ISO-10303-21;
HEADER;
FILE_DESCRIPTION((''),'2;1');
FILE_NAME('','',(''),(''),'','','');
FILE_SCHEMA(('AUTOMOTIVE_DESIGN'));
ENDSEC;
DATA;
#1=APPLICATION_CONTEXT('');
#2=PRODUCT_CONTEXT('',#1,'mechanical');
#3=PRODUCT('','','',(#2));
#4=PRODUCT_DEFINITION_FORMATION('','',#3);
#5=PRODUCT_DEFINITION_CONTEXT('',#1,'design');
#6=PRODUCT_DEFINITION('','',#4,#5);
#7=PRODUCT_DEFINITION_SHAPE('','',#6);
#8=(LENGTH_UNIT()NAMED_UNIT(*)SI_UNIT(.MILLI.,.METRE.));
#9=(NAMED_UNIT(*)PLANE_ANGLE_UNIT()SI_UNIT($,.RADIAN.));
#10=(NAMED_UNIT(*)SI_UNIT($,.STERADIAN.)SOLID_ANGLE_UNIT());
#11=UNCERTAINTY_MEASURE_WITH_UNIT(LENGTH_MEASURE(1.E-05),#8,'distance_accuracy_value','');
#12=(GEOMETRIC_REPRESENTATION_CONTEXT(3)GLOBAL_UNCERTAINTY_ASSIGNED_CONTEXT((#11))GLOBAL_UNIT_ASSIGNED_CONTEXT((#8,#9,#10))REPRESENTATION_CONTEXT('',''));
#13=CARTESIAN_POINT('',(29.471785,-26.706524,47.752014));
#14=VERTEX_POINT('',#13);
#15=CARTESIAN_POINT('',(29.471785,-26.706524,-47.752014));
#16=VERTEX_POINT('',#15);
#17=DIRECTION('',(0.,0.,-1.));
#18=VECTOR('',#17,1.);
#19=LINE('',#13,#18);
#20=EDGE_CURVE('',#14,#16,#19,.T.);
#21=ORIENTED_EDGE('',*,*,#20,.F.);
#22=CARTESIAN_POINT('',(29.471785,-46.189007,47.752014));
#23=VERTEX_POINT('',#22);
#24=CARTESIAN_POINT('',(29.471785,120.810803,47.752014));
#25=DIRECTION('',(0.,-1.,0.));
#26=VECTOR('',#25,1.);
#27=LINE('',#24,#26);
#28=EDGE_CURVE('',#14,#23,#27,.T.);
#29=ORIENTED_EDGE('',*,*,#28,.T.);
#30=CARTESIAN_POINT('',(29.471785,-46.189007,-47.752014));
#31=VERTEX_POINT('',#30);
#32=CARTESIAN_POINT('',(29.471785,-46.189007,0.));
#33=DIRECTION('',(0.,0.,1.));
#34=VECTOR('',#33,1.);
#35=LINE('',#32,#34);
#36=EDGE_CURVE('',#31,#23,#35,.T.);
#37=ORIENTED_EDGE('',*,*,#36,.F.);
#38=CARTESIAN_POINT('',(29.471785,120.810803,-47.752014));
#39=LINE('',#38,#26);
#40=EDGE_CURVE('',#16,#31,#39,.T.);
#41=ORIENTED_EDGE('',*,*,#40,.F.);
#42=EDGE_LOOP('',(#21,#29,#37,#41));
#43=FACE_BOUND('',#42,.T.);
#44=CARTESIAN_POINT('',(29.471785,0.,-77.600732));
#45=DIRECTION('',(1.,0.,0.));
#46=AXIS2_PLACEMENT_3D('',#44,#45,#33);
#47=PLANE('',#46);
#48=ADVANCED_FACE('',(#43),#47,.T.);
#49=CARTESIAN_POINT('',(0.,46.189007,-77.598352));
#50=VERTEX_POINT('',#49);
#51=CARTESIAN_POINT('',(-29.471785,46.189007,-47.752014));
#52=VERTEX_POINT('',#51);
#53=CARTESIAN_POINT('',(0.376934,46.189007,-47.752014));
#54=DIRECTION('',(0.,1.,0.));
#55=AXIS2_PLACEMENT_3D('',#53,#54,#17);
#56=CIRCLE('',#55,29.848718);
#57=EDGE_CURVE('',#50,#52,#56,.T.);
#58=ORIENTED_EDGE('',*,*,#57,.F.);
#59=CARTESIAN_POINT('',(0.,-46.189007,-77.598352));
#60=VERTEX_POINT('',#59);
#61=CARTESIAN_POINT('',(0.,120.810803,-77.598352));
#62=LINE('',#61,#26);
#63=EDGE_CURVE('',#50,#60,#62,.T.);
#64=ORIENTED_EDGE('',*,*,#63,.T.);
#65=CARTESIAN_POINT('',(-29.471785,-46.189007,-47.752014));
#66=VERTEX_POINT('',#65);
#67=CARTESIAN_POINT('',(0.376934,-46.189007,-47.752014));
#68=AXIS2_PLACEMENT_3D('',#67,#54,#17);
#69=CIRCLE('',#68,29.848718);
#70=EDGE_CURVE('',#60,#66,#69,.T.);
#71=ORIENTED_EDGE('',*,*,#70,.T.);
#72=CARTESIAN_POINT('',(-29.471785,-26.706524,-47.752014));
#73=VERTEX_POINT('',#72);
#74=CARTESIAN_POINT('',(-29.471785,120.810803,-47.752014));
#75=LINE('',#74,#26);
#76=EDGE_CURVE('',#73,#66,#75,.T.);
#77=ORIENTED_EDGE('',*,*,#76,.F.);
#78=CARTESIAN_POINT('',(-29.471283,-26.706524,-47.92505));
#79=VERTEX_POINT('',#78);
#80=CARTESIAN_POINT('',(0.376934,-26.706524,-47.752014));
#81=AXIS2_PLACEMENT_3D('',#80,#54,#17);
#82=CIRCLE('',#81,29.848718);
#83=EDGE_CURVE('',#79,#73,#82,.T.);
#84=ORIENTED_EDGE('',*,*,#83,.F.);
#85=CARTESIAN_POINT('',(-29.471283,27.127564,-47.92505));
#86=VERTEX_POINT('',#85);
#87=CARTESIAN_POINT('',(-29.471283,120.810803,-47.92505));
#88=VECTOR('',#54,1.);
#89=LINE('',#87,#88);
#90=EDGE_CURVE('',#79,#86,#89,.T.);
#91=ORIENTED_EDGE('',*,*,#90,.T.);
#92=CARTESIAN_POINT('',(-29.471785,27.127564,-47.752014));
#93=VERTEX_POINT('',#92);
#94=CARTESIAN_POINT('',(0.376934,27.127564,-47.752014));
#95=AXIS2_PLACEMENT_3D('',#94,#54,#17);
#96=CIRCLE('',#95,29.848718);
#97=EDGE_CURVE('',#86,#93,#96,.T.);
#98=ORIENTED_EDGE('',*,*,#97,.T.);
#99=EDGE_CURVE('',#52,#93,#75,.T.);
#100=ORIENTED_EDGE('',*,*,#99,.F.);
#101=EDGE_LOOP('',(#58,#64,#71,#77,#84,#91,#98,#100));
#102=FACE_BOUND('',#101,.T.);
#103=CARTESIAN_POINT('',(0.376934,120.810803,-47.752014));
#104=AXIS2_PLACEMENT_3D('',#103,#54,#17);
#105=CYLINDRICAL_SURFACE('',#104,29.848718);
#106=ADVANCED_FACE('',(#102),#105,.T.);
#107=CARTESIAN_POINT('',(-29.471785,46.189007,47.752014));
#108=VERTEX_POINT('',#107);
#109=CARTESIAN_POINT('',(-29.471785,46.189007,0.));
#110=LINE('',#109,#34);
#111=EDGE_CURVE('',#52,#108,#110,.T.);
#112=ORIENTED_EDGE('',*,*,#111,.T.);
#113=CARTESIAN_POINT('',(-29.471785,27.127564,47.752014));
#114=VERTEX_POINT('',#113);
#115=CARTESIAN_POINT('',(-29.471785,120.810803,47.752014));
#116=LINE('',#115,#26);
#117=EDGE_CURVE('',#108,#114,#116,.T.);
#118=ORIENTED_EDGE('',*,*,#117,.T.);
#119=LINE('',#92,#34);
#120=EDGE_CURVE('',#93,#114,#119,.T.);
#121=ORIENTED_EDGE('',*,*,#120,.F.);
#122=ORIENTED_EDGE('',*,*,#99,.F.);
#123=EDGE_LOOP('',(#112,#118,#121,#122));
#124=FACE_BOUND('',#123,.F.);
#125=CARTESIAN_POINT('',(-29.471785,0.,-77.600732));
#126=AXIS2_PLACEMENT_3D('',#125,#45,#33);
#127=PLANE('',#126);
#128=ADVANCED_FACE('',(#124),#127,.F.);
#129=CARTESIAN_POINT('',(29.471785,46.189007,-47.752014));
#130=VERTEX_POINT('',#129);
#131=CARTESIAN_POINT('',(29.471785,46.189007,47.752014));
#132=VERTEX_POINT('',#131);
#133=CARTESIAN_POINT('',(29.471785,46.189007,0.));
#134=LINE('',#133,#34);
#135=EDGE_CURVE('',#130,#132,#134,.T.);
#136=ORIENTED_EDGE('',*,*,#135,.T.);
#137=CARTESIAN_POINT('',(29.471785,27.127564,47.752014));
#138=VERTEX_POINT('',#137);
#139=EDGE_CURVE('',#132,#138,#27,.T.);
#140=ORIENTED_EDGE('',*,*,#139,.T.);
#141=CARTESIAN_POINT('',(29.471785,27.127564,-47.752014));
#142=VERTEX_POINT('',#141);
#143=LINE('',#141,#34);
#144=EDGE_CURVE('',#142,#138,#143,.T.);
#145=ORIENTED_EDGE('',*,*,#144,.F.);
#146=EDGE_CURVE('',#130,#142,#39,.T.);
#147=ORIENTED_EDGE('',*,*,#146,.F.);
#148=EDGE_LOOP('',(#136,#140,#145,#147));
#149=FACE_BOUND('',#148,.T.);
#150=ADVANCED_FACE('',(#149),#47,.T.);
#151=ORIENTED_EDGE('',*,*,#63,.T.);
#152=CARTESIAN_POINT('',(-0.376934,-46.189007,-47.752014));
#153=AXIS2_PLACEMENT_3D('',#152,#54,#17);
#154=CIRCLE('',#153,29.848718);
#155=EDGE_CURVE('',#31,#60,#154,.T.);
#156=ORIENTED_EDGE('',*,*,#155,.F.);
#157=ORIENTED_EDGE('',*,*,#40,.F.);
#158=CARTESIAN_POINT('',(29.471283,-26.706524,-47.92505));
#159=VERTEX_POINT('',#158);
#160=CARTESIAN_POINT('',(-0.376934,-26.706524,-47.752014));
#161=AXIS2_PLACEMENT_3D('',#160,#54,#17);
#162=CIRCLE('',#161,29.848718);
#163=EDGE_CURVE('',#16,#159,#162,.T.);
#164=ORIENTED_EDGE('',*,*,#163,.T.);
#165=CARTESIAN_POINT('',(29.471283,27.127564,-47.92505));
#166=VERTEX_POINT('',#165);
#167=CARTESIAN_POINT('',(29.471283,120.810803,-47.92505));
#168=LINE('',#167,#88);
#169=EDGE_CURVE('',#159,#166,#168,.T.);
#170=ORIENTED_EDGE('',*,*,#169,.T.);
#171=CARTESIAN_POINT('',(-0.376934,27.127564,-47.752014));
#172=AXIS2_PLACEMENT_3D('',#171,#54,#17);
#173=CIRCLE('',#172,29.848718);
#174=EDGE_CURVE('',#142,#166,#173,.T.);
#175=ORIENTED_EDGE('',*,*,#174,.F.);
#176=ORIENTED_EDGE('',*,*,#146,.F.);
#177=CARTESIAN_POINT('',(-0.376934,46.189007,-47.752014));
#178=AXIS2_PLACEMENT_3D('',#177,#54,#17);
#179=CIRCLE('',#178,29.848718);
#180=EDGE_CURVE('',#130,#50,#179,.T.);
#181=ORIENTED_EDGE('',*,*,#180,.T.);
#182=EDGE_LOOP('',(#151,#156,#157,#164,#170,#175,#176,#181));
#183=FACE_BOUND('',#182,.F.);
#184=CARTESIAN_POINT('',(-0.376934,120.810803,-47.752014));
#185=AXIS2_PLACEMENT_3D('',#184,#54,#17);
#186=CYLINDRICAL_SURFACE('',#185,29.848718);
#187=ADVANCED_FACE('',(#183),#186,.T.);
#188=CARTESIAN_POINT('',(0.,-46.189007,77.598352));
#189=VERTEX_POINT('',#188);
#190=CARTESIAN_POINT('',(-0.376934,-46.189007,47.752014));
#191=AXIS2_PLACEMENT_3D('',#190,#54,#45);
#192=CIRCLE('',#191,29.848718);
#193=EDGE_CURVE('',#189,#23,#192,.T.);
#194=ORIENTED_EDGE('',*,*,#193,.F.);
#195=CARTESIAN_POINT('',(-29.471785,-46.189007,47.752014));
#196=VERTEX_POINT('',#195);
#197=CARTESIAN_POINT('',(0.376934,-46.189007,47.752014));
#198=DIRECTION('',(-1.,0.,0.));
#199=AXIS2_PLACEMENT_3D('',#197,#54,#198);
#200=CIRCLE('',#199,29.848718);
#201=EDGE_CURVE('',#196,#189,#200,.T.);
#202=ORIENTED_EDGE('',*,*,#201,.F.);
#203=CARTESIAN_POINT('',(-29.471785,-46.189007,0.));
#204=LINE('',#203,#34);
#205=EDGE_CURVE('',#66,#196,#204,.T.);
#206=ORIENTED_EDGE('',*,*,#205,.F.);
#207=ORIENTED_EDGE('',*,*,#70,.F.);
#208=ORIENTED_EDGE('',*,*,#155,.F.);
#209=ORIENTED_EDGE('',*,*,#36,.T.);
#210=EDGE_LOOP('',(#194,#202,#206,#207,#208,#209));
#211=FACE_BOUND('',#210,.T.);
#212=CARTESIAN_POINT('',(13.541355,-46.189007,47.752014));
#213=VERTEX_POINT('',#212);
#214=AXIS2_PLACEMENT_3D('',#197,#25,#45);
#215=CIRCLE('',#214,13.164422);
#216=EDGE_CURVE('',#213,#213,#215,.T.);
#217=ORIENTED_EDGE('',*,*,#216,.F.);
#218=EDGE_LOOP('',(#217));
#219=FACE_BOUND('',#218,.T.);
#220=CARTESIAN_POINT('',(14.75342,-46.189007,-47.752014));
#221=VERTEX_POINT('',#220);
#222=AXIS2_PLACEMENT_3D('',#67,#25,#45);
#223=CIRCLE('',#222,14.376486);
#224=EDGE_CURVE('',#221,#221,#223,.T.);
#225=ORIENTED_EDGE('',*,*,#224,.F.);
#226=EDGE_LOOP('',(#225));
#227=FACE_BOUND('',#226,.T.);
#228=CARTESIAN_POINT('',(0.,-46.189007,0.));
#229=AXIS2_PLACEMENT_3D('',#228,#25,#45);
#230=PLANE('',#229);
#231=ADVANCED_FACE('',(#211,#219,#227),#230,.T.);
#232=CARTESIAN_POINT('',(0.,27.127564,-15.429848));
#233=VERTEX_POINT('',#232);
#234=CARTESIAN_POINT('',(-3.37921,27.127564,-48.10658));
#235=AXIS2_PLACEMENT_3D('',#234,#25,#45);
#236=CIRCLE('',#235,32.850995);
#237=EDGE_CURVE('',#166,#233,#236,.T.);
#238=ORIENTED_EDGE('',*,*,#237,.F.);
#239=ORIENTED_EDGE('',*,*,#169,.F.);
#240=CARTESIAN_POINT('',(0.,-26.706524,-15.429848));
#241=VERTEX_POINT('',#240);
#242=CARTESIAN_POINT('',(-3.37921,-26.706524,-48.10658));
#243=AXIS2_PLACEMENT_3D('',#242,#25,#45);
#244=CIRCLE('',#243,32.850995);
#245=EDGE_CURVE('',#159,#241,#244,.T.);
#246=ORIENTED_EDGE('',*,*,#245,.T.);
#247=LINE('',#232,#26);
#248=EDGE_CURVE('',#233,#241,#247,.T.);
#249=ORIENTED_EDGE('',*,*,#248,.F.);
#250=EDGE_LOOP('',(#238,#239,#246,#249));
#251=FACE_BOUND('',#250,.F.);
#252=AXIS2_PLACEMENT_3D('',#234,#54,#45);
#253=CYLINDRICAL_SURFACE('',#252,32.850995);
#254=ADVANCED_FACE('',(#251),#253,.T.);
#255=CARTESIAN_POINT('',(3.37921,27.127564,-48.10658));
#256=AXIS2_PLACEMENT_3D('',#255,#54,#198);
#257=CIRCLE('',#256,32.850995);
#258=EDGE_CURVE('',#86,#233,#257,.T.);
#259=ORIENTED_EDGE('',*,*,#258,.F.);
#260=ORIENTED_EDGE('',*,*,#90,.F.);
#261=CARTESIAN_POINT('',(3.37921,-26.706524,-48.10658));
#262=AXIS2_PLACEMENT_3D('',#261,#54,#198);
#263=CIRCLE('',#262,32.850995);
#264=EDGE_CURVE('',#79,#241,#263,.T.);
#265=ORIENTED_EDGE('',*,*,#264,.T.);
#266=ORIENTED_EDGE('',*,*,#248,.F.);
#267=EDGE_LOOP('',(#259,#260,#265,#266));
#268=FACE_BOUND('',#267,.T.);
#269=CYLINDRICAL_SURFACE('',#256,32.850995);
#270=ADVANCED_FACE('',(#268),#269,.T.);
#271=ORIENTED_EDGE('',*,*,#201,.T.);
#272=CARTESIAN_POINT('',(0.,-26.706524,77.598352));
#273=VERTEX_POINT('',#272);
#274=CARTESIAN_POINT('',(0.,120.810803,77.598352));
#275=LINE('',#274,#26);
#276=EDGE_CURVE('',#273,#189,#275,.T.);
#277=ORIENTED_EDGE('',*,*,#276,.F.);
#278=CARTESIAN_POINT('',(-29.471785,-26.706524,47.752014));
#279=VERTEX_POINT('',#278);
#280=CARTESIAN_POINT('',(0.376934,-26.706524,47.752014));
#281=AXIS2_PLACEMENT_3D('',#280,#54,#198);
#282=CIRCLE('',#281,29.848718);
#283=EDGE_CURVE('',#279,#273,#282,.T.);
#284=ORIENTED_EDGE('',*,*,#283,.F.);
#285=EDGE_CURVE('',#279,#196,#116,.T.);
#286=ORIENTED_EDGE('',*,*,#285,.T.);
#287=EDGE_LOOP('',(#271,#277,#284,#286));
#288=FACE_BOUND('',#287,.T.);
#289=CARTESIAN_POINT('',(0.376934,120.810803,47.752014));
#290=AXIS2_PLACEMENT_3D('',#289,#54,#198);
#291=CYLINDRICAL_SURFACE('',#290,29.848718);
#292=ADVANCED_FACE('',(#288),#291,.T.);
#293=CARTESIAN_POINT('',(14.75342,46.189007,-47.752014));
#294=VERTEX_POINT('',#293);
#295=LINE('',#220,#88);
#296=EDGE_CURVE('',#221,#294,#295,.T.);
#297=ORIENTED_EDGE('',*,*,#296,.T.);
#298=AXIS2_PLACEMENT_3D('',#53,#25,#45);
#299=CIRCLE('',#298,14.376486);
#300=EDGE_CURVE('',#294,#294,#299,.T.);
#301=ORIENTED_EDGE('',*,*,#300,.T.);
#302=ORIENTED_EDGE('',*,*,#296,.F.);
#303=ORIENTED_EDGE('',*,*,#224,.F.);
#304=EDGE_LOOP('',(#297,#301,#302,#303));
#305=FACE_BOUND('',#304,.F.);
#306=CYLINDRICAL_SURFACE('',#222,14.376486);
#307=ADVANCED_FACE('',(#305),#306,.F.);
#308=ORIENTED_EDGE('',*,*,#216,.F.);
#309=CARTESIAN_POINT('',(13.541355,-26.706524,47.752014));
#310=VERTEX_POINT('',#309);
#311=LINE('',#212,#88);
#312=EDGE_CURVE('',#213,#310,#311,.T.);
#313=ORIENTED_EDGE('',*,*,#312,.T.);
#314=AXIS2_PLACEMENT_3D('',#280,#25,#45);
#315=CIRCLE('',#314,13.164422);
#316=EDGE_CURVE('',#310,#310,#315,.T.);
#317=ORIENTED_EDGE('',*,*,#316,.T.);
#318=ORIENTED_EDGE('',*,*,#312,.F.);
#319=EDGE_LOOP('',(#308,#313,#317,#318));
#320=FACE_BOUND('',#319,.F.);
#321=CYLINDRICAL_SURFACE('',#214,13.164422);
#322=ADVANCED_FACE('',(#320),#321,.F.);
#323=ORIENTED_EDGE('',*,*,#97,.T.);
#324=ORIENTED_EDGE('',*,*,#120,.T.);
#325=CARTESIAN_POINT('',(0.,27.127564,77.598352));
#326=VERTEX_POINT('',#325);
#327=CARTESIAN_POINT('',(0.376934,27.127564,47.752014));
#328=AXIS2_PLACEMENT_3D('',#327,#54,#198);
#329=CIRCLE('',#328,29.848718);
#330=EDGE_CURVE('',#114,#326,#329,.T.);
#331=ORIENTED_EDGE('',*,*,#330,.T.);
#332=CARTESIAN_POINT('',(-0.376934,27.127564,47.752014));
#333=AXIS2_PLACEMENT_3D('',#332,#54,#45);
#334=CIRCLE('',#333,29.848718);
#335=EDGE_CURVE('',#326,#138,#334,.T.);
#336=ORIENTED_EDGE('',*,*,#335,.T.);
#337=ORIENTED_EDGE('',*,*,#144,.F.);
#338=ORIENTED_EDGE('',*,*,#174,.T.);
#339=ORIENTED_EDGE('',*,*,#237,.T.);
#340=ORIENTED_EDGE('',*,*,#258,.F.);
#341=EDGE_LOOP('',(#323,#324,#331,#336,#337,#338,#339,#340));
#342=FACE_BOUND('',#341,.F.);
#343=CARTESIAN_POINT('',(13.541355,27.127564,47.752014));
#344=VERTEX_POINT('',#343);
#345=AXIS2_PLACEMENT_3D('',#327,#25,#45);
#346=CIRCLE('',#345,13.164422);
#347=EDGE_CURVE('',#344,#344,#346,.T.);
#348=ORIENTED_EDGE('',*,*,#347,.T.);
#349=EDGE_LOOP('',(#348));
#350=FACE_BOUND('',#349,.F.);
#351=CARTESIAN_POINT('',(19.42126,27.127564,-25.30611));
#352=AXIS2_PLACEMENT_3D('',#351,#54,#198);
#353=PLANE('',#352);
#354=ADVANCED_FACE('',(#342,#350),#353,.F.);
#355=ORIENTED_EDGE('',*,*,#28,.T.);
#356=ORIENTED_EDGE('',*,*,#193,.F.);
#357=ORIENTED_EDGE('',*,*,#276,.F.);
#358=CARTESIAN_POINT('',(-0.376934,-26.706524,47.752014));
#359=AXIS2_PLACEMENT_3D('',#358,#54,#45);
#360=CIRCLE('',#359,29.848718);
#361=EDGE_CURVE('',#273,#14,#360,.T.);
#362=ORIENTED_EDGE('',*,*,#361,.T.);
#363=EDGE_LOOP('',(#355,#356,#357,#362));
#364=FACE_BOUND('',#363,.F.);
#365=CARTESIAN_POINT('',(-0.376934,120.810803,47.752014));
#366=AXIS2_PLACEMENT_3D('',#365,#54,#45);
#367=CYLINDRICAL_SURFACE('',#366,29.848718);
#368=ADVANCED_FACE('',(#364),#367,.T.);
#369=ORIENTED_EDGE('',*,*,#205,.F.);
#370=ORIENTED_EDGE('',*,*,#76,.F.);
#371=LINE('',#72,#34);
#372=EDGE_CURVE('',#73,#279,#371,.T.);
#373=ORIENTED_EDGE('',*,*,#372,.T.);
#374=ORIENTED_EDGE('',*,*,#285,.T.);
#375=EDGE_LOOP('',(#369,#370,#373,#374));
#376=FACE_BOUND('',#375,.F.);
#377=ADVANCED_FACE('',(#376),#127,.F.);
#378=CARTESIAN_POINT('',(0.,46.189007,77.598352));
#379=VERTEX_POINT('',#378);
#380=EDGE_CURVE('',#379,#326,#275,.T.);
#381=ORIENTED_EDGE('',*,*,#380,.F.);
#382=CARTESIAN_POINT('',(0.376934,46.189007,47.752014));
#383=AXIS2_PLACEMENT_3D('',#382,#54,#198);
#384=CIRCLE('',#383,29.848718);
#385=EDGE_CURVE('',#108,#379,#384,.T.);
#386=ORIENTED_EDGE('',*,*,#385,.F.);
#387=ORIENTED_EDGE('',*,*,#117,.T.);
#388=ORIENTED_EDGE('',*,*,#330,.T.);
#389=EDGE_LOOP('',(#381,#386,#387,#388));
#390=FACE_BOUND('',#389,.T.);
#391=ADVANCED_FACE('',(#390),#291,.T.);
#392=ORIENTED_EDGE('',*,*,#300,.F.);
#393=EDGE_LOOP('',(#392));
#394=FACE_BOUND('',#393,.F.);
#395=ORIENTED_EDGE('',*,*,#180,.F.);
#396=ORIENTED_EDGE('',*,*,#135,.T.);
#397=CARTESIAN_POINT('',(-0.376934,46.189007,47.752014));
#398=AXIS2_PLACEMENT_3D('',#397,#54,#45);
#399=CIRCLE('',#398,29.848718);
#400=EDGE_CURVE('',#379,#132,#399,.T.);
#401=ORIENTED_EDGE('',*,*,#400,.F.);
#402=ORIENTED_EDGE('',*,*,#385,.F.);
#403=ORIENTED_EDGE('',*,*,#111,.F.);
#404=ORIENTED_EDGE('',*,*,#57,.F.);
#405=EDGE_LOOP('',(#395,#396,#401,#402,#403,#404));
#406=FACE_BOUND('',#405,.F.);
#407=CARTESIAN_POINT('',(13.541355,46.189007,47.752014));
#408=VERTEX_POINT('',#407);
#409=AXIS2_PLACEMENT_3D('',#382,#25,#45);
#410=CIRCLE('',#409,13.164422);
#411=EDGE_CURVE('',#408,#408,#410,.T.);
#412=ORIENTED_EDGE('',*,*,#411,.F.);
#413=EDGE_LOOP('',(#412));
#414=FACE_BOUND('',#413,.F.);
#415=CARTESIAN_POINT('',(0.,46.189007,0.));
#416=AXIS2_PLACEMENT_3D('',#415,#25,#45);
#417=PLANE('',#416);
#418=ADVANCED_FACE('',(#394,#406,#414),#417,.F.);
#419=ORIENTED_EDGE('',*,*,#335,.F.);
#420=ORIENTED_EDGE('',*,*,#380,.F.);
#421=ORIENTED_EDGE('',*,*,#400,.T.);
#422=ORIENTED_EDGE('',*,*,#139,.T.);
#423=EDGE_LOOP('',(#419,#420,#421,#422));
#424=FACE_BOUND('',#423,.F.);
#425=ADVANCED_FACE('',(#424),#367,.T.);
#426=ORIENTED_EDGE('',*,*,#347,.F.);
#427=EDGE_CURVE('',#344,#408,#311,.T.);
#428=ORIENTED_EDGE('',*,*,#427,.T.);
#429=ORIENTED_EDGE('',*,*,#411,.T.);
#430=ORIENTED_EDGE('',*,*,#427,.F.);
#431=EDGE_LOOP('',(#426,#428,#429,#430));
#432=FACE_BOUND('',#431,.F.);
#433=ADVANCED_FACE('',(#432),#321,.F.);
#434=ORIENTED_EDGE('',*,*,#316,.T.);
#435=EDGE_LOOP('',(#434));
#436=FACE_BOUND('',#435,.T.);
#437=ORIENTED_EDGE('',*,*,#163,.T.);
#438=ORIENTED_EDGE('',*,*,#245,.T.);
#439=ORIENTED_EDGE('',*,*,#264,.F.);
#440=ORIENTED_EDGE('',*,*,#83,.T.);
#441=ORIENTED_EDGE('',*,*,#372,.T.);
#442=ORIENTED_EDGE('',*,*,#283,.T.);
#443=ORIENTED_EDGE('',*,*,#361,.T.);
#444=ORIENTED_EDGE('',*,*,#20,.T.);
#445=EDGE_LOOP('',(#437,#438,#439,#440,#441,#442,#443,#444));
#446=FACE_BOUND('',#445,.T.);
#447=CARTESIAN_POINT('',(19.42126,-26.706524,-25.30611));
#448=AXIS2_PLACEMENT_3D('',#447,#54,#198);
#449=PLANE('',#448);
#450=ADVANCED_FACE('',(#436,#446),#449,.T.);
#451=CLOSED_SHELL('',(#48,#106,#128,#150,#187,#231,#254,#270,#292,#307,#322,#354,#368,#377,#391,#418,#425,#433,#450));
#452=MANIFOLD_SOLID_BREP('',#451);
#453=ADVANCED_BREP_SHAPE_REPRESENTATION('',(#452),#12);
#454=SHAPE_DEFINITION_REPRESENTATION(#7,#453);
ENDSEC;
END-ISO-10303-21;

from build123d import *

# Parameters (mm, degrees)
F0_W        = 58.9435696602
F0_H        = 155.2014648914
F4_DEPTH    = 46.1890073493
F5_W        = 53.8340881467
F5_H        = 92.8563177586
F1_DEPTH    = 58.9445696602
F2_T1_DEPTH = 168.3050352459
F2_T3_DEPTH = 168.726075006
F2_T5_DEPTH = 241.6216065486
F3_T1_DEPTH = 53.8340881467
F6_R        = 13.164421927
F6_R_2      = 14.3764863779
F7_DEPTH    = 92.3790146986


# Not quite as in the source:
# - a fillet or chamfer that OpenCascade refuses, or shapes differently, is made with other operations: its cross-section is extruded or revolved along the edge and cut away or added


with BuildPart() as f4:
    # F0 (on Front) → F4 (new body, symmetric)
    with BuildSketch(Plane.XZ):
        Rectangle(F0_W, F0_H)
    extrude(amount=F4_DEPTH, both=True)

    # F5 (on face) → F1 (cut, through all)
    with BuildSketch(Plane.YZ.offset(29.4717848301)):
        with Locations((0.2105198801, 31.1725735664)):
            Rectangle(F5_W, F5_H)
    extrude(amount=-F1_DEPTH, mode=Mode.SUBTRACT)

    # F2: fillet of radius 29.84871837 on 6 edges, made by hand

    # F2_s2 → F2_t1 (cut)
    with BuildSketch(Plane.XZ.offset(-120.8108032743)):
        with BuildLine():
            ThreePointArc((29.4717848301, 47.7520140757), (20.7292976292, 68.8582452449), (-0.3769335399, 77.6007324457))
            Line((-0.3769335399, 77.6007324457), (29.4717848301, 77.6007324457))
            Line((29.4717848301, 77.6007324457), (29.4717848301, 47.7520140757))
        make_face()
        with BuildLine():
            ThreePointArc((-29.4717848301, 47.7520140757), (-20.7292976292, 68.8582452449), (0.3769335399, 77.6007324457))
            Line((0.3769335399, 77.6007324457), (-29.4717848301, 77.6007324457))
            Line((-29.4717848301, 77.6007324457), (-29.4717848301, 47.7520140757))
        make_face()
    extrude(amount=F2_T1_DEPTH, mode=Mode.SUBTRACT)

    # F2_s4 → F2_t3 (cut)
    with BuildSketch(Plane.XZ.offset(-47.9152717317)):
        with BuildLine():
            ThreePointArc((29.4717848301, 47.7520140757), (20.7292976292, 68.8582452449), (-0.3769335399, 77.6007324457))
            Line((-0.3769335399, 77.6007324457), (29.4717848301, 77.6007324457))
            Line((29.4717848301, 77.6007324457), (29.4717848301, 47.7520140757))
        make_face()
        with BuildLine():
            ThreePointArc((-29.4717848301, 47.7520140757), (-20.7292976292, 68.8582452449), (0.3769335399, 77.6007324457))
            Line((0.3769335399, 77.6007324457), (-29.4717848301, 77.6007324457))
            Line((-29.4717848301, 77.6007324457), (-29.4717848301, 47.7520140757))
        make_face()
    extrude(amount=F2_T3_DEPTH, mode=Mode.SUBTRACT)

    # F2_s6 → F2_t5 (cut)
    with BuildSketch(Plane.XZ.offset(-120.8108032743)):
        with BuildLine():
            ThreePointArc((-0.3769335399, -77.6007324457), (20.7292976292, -68.8582452449), (29.4717848301, -47.7520140757))
            Line((29.4717848301, -47.7520140757), (29.4717848301, -77.6007324457))
            Line((29.4717848301, -77.6007324457), (-0.3769335399, -77.6007324457))
        make_face()
        with BuildLine():
            ThreePointArc((0.3769335399, -77.6007324457), (-20.7292976292, -68.8582452449), (-29.4717848301, -47.7520140757))
            Line((-29.4717848301, -47.7520140757), (-29.4717848301, -77.6007324457))
            Line((-29.4717848301, -77.6007324457), (0.3769335399, -77.6007324457))
        make_face()
    extrude(amount=F2_T5_DEPTH, mode=Mode.SUBTRACT)

    # F3: fillet of radius 32.8509948239 on 2 edges, made by hand

    # F3_s2 → F3_t1 (cut)
    with BuildSketch(Plane.XZ.offset(-27.1275639534)):
        with BuildLine():
            ThreePointArc((29.4717848301, -48.1065801367), (19.8499512149, -24.877418928), (-3.3792099938, -15.2555853128))
            Line((-3.3792099938, -15.2555853128), (29.4717848301, -15.2555853128))
            Line((29.4717848301, -15.2555853128), (29.4717848301, -48.1065801367))
        make_face()
        with BuildLine():
            ThreePointArc((-29.4717848301, -48.1065801367), (-19.8499512149, -24.877418928), (3.3792099938, -15.2555853128))
            Line((3.3792099938, -15.2555853128), (-29.4717848301, -15.2555853128))
            Line((-29.4717848301, -15.2555853128), (-29.4717848301, -48.1065801367))
        make_face()
    extrude(amount=F3_T1_DEPTH, mode=Mode.SUBTRACT)

    # F6 (on face) → F7 (cut, through all)
    with BuildSketch(Plane.XZ.offset(46.1890073493)):
        with Locations((0.3769335399, 47.7520140757)):
            Circle(F6_R)
        with Locations((0.3769335399, -47.7520140757)):
            Circle(F6_R_2)
    extrude(amount=-F7_DEPTH, mode=Mode.SUBTRACT)


solid = f4.part
